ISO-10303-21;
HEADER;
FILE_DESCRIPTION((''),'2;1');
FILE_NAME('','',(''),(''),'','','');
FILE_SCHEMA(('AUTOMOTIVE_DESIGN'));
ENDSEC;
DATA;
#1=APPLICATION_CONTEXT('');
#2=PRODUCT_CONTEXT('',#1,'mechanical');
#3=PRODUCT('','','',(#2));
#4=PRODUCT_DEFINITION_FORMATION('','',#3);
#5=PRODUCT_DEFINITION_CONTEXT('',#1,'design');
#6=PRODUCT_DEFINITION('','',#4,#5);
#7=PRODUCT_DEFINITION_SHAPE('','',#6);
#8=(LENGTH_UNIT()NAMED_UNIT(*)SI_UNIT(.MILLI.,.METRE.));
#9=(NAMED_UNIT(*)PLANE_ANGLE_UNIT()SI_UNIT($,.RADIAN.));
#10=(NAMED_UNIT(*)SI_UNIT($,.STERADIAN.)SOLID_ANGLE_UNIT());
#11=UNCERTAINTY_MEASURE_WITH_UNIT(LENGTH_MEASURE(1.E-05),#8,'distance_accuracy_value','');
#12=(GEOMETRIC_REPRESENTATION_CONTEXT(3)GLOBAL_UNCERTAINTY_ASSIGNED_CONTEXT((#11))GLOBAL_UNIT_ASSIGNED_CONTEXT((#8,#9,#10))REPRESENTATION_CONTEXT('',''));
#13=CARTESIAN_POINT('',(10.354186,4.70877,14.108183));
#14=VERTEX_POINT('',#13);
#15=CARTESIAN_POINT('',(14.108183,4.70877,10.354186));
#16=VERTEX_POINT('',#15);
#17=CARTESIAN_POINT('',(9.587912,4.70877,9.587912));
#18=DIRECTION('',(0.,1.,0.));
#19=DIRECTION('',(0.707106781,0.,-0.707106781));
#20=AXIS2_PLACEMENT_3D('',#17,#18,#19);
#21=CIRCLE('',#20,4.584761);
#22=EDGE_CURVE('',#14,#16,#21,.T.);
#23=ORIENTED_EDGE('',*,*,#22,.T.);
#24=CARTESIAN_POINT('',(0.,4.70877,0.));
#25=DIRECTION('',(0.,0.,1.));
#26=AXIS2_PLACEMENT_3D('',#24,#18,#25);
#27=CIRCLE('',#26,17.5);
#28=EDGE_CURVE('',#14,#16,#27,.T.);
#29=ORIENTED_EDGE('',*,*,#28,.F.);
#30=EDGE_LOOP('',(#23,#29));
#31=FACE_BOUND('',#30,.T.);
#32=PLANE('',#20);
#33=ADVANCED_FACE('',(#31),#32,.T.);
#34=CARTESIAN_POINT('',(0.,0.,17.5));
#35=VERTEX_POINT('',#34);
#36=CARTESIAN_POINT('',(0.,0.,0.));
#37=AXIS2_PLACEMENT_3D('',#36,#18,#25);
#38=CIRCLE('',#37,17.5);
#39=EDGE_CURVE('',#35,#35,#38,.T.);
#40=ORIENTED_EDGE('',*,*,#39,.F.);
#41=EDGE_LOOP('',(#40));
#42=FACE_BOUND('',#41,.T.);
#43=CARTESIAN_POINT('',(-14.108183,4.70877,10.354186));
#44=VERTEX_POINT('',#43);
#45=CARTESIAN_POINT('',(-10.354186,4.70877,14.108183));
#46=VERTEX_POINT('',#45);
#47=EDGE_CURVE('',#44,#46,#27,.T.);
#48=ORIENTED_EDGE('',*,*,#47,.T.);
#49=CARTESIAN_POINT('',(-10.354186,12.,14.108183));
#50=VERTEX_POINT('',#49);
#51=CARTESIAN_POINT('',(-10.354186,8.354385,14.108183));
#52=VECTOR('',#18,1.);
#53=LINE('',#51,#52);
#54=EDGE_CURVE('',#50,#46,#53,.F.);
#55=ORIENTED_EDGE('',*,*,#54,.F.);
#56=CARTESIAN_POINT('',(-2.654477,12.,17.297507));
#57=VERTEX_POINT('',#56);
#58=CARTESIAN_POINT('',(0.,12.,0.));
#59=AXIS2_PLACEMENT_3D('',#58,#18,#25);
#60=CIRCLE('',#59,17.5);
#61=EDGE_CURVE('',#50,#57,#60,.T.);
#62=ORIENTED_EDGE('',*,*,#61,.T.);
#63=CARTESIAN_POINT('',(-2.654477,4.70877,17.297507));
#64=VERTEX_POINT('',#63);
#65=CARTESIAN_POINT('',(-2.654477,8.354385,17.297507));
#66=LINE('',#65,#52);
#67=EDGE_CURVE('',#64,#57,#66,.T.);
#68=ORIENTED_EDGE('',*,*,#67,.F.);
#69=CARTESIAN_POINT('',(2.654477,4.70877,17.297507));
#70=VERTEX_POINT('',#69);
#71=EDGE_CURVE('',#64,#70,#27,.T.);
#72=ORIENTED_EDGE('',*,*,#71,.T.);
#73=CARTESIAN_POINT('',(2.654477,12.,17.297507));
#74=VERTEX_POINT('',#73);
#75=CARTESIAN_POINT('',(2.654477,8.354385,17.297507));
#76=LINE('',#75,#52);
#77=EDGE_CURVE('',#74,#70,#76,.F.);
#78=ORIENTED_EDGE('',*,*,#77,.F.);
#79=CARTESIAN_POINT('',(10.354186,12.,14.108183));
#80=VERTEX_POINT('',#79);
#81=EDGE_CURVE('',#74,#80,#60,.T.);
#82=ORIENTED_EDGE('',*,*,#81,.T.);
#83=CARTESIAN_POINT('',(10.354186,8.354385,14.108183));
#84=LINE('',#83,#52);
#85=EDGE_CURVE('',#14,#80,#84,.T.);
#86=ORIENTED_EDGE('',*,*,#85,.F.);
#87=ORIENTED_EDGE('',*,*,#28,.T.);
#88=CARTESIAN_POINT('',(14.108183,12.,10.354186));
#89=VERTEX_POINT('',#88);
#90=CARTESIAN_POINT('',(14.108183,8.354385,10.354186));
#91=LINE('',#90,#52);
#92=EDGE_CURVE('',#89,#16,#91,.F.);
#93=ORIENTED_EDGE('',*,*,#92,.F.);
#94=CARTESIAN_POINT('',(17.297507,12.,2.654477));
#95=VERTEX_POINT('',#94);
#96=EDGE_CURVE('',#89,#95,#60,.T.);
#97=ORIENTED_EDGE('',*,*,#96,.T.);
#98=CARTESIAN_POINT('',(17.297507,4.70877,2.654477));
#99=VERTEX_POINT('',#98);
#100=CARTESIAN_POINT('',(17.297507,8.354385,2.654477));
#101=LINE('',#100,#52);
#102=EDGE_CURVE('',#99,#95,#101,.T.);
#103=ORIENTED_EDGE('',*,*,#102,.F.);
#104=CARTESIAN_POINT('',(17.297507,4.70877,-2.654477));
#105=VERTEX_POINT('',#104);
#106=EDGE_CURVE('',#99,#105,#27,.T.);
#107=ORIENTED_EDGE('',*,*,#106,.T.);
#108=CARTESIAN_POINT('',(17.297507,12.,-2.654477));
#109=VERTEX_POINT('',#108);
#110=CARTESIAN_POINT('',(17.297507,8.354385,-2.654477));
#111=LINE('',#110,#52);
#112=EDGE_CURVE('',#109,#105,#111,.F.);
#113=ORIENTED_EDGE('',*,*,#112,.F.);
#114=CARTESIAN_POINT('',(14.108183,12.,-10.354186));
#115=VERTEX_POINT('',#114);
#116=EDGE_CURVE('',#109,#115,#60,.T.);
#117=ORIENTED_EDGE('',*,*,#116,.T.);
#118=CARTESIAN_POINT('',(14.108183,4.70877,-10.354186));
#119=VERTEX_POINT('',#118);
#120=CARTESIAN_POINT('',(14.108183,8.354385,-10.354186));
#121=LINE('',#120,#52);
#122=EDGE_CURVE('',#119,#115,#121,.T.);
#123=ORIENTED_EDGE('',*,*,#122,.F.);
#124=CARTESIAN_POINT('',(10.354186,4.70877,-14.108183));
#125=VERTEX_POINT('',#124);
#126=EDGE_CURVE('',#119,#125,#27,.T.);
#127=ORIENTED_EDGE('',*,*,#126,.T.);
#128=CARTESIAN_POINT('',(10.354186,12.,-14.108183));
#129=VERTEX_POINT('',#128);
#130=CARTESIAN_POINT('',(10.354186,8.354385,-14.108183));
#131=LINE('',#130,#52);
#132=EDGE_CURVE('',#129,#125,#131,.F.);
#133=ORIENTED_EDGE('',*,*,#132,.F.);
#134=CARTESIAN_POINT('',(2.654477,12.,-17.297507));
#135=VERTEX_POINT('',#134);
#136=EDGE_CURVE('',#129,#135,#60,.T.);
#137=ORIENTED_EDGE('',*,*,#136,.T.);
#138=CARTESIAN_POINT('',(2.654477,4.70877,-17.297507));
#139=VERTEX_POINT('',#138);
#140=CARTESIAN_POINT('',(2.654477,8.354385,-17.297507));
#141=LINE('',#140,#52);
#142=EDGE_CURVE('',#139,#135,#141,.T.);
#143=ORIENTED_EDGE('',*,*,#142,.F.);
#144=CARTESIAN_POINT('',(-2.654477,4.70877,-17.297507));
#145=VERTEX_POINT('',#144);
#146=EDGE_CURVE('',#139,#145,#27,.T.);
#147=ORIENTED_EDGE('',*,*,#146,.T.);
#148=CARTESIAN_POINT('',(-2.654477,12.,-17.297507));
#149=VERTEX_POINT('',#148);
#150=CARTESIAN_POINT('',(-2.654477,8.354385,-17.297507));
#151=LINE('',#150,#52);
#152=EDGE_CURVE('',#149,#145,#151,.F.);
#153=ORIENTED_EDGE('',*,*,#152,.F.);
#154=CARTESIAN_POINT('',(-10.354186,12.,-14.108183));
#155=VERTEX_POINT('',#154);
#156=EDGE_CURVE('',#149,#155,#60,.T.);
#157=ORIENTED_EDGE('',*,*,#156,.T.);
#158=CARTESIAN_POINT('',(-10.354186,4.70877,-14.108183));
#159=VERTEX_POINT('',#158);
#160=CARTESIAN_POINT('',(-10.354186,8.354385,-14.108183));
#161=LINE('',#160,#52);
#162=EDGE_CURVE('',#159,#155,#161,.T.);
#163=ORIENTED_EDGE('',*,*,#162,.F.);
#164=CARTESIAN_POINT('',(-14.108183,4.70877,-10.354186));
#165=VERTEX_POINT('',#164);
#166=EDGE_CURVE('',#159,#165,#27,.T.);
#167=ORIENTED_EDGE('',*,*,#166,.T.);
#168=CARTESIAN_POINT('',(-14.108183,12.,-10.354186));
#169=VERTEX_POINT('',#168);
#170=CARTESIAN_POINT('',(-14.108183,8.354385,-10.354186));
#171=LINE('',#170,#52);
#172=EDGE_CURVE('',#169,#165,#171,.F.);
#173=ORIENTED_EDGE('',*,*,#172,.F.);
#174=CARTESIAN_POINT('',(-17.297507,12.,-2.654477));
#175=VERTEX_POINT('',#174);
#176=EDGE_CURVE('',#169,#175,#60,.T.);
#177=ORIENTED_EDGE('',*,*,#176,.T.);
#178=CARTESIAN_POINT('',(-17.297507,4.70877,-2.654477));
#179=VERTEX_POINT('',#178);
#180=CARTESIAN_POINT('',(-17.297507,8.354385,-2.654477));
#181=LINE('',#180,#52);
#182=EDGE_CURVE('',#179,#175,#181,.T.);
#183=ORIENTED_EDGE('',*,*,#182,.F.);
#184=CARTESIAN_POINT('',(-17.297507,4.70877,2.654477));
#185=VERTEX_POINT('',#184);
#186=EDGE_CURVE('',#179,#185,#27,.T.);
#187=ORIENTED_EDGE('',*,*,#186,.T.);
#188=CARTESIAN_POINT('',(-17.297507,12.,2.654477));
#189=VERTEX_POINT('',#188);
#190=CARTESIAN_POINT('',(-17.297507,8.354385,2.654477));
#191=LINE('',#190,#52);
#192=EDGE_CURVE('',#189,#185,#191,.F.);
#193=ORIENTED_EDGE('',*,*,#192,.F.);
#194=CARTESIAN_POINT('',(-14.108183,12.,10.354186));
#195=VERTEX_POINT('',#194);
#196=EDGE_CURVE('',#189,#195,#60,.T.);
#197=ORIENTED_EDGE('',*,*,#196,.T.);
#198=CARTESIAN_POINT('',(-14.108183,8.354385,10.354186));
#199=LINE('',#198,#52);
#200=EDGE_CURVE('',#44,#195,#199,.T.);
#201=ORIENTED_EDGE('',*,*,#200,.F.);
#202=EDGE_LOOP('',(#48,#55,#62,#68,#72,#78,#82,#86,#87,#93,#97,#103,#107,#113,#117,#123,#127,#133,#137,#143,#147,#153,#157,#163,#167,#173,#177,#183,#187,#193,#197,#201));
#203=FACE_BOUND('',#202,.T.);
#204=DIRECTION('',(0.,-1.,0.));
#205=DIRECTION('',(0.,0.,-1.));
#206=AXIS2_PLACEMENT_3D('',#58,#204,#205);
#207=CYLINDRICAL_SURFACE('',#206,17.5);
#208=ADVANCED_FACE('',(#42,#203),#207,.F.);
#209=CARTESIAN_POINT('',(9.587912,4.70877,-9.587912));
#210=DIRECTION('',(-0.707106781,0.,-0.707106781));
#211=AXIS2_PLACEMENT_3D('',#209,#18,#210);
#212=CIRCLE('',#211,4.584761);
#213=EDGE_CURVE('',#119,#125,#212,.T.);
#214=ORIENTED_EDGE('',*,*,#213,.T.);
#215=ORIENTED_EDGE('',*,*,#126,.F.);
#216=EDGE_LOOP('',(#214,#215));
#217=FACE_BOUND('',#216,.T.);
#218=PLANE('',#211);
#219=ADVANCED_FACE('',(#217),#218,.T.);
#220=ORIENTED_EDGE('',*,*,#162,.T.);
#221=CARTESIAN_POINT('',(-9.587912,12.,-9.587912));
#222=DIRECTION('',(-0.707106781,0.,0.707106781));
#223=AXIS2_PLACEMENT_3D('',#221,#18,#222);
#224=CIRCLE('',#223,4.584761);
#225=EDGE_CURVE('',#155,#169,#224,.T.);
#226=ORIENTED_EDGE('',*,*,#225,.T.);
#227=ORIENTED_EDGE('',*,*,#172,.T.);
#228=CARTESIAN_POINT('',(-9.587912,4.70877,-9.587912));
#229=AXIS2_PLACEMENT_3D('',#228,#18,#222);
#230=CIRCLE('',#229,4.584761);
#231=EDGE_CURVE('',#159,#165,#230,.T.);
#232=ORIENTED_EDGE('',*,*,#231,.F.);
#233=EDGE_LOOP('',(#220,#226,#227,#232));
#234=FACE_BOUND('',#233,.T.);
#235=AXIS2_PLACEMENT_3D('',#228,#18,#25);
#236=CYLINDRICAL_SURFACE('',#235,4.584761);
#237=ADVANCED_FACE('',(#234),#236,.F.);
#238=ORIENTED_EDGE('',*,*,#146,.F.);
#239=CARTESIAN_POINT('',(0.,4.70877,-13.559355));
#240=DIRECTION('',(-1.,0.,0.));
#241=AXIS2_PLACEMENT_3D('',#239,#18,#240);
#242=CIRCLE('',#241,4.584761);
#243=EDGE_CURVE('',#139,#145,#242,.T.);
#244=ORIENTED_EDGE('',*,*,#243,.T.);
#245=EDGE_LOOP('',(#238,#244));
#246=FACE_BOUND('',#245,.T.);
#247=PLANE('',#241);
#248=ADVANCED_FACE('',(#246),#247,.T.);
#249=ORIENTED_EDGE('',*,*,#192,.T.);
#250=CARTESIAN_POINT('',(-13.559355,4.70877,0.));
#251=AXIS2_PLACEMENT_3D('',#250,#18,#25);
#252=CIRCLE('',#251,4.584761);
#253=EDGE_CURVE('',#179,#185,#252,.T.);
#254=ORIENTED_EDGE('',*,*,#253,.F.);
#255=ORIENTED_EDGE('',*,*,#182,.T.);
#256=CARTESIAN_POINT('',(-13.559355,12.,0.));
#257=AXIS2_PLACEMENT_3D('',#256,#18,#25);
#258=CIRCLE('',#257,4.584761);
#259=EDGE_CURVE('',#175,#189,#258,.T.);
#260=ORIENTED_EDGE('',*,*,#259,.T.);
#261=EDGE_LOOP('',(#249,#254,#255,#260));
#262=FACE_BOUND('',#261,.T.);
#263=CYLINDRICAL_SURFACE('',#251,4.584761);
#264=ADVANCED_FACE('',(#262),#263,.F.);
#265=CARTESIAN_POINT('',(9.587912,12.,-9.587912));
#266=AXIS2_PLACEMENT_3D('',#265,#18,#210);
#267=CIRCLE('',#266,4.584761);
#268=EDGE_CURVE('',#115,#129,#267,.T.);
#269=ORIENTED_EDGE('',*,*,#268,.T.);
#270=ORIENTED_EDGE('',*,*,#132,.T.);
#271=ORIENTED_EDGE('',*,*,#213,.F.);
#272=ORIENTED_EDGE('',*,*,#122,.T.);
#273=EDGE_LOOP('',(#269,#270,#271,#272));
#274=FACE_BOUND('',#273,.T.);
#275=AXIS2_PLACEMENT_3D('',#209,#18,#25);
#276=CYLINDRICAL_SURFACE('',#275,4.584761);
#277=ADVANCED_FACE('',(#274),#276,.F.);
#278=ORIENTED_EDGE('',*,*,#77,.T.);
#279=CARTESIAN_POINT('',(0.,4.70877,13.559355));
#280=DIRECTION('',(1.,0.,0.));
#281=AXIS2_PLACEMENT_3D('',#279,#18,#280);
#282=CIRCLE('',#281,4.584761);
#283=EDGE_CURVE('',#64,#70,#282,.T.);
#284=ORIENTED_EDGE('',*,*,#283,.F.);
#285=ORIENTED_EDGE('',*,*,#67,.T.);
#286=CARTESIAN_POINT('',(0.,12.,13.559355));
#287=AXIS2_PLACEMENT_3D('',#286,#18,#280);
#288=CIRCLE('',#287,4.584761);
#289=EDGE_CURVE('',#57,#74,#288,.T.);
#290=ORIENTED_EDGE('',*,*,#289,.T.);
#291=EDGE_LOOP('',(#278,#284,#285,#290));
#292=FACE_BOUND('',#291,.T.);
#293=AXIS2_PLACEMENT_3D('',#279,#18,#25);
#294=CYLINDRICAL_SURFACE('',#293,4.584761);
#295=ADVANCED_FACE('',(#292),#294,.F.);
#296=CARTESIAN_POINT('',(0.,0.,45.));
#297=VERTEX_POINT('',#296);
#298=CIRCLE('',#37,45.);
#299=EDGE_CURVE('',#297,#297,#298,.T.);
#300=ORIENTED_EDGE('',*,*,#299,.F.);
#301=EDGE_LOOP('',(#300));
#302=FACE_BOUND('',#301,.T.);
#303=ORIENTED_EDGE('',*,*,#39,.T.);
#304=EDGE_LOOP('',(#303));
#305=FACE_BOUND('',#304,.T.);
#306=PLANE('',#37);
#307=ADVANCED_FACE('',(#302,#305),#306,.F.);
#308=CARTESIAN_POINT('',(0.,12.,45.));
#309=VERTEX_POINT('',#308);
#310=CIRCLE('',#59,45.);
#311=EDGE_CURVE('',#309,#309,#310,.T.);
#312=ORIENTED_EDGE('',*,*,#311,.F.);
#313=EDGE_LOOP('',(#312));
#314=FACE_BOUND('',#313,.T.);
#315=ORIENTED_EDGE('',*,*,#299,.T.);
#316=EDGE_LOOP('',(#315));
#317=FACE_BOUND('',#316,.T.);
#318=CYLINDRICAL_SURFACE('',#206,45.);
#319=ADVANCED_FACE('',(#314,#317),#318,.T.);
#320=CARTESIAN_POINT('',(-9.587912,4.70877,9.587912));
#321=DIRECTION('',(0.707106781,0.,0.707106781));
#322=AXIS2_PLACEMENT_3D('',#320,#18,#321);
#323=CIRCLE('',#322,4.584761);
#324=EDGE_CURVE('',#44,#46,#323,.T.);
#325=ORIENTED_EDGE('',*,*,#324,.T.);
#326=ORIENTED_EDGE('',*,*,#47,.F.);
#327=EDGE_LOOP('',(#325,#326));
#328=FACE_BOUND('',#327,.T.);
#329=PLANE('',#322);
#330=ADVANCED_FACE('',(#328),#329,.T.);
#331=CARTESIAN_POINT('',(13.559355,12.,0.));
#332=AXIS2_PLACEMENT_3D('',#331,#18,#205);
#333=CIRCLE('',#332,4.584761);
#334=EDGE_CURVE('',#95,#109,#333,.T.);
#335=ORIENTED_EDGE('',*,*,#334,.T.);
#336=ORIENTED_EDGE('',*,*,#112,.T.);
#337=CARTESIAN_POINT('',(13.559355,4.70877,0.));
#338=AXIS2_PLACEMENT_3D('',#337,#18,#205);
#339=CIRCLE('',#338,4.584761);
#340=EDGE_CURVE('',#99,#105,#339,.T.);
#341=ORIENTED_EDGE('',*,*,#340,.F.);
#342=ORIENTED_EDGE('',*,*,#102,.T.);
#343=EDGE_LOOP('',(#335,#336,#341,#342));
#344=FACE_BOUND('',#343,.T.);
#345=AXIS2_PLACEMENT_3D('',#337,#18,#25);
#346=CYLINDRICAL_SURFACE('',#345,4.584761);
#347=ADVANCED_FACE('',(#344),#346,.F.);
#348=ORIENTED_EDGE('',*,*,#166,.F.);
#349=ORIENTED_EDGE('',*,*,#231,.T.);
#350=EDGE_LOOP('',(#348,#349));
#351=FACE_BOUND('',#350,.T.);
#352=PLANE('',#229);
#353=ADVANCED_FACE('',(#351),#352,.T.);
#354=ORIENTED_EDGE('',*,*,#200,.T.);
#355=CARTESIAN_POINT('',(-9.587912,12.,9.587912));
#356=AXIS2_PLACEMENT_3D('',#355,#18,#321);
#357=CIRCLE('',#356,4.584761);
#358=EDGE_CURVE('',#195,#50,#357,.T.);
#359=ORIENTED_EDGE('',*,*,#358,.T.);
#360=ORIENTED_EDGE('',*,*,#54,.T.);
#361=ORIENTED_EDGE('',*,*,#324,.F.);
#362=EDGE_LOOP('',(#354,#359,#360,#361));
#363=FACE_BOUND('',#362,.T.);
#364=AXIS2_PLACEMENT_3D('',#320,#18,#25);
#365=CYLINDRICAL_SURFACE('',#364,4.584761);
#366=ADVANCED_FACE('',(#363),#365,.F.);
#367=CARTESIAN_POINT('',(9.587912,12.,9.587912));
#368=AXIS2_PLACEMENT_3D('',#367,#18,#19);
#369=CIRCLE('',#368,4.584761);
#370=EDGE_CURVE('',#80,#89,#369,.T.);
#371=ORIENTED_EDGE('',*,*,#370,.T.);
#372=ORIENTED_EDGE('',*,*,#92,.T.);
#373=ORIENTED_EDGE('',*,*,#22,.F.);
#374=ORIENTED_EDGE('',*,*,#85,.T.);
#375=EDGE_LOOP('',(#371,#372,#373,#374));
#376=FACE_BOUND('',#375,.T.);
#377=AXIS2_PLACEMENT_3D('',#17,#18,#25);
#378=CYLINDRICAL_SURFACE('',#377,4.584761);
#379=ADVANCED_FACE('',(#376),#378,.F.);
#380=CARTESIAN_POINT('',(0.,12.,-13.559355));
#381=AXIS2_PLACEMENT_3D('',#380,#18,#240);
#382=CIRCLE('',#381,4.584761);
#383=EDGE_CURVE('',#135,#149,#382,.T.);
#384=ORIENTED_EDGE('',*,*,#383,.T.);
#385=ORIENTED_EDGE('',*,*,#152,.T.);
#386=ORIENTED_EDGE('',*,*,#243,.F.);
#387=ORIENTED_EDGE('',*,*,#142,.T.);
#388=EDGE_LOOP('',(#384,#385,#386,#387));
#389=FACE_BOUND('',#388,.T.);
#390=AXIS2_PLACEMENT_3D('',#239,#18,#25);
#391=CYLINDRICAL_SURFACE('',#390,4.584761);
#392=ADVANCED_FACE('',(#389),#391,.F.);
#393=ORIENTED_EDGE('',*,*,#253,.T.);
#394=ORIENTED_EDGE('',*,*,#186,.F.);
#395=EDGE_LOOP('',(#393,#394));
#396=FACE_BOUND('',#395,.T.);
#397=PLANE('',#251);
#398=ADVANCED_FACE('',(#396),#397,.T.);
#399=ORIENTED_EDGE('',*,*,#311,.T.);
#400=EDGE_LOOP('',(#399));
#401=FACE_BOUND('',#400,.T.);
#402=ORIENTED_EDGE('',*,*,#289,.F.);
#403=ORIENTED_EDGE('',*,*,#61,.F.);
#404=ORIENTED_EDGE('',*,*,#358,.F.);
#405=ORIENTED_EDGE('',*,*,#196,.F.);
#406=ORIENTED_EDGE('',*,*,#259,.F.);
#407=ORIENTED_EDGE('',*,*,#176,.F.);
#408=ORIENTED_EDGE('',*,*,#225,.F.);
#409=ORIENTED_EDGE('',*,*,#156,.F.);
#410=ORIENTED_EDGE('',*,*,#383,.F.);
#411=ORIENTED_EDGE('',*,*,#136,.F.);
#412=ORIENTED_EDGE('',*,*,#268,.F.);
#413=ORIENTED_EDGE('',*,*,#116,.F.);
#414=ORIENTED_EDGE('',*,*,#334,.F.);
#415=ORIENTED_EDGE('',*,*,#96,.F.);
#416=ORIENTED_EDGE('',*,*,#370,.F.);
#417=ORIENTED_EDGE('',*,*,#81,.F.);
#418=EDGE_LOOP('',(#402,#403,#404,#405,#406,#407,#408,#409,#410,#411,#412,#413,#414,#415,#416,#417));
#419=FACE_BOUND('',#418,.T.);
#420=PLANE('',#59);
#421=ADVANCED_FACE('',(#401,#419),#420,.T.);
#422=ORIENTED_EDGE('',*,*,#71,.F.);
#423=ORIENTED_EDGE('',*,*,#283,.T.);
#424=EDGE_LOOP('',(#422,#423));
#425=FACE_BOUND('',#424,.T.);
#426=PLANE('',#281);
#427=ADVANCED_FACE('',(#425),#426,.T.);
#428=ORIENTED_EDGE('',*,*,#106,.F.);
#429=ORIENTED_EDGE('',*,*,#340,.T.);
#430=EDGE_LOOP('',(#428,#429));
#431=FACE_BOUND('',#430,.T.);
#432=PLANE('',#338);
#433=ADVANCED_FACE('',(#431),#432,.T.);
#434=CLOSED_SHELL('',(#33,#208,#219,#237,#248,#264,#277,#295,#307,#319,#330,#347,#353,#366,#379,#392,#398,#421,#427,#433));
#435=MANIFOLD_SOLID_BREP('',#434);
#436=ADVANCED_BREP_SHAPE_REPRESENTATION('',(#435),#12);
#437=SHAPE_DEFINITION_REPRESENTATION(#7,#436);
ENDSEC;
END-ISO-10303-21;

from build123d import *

# Parameters (mm, degrees)
SKETCH1_R           = 45
BOSS_EXTRUDE1_DEPTH = 12
SKETCH2_R           = 17.5
CUT_EXTRUDE1_DEPTH  = 65.761099435
SKETCH3_R           = 4.584760577
CUT_EXTRUDE2_DEPTH  = 7.291230431
CIRPATTERN1_COUNT   = 8


with BuildPart() as part:
    # Sketch1 → Boss-Extrude1 (new body)
    with BuildSketch(Plane(origin=(0, 0, 0), x_dir=(1, 0, 0), z_dir=(0, 1, 0))):
        Circle(SKETCH1_R)
    extrude(amount=BOSS_EXTRUDE1_DEPTH)

    # Sketch2 → Cut-Extrude1 (cut, through all)
    with BuildSketch(Plane(origin=(0, 0, 0), x_dir=(1, 0, 0), z_dir=(0, 1, 0))):
        Circle(SKETCH2_R)
    extrude(amount=CUT_EXTRUDE1_DEPTH, mode=Mode.SUBTRACT)

    # Sketch3 → Cut-Extrude2 (cut)
    with BuildSketch(Plane(origin=(0, 12, 0), x_dir=(1, 0, 0), z_dir=(0, 1, 0))):
        with Locations((-13.559354716, 0)):
            Circle(SKETCH3_R)
    cut_extrude2 = extrude(amount=-CUT_EXTRUDE2_DEPTH, mode=Mode.SUBTRACT)

    # CirPattern1: Cut-Extrude2 ×8 about axis
    cirpattern1_axis = Axis((0, 0, 0), (0, 1, 0))
    for i in range(1, CIRPATTERN1_COUNT):
        add(cut_extrude2.rotate(cirpattern1_axis, i * 360 / CIRPATTERN1_COUNT), mode=Mode.SUBTRACT)


solid = part.part
